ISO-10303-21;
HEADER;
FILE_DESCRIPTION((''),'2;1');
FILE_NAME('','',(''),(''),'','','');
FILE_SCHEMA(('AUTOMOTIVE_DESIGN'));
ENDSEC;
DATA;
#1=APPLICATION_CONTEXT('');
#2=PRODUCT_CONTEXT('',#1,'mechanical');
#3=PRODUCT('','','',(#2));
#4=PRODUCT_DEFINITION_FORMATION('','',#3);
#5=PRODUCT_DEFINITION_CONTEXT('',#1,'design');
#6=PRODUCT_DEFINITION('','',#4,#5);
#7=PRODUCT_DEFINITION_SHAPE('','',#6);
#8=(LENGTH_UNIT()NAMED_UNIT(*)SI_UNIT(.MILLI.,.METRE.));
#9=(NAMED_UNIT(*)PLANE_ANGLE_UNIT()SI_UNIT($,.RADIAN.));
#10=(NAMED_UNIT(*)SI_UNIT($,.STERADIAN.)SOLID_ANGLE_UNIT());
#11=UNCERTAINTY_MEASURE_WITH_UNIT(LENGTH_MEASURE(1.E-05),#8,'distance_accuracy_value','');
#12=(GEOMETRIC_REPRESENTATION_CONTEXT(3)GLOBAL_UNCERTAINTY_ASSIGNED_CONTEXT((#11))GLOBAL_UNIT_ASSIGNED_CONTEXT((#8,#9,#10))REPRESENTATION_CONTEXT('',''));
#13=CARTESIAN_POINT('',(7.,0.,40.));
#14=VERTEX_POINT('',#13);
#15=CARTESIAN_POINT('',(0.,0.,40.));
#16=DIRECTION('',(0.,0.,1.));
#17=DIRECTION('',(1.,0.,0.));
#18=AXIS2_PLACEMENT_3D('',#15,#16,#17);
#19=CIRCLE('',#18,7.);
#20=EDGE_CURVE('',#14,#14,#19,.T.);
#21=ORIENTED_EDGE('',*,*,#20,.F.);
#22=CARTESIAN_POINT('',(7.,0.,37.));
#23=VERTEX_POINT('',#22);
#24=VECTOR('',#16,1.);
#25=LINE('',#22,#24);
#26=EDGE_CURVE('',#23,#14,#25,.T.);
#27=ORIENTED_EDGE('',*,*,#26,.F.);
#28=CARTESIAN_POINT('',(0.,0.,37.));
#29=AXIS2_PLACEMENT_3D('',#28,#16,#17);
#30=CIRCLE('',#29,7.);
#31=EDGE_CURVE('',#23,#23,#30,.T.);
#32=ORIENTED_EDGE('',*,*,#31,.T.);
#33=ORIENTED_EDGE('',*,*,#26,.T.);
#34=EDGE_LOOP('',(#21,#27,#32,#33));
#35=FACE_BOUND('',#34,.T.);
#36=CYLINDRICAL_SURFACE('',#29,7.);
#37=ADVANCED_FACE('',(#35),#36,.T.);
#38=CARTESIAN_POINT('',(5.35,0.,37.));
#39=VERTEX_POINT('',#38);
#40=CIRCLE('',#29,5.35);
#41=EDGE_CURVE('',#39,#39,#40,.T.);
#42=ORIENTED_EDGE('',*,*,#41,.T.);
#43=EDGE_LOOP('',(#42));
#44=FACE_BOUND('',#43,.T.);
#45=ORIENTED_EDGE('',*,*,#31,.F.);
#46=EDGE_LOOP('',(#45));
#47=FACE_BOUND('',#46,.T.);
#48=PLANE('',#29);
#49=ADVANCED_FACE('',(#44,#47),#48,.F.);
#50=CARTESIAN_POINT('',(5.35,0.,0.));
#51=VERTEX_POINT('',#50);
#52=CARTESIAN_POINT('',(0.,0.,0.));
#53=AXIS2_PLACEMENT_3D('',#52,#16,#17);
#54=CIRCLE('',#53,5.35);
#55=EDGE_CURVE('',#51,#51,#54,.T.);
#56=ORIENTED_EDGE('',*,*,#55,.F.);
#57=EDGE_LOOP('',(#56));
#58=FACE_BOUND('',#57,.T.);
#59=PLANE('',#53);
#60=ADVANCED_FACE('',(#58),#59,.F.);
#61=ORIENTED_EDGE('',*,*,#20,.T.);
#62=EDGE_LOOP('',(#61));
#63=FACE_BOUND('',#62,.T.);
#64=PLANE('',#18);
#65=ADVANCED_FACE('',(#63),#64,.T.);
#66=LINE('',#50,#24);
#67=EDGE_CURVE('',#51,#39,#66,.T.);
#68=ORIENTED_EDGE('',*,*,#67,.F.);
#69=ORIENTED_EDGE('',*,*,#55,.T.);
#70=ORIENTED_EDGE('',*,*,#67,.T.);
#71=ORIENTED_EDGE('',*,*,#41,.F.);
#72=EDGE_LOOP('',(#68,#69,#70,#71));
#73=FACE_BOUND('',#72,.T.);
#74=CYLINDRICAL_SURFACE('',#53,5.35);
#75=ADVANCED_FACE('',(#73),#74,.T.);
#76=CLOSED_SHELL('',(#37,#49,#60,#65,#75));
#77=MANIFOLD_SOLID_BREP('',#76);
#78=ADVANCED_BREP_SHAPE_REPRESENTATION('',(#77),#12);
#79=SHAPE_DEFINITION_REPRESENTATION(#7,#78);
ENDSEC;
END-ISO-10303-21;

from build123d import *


# Not quite as in the source:
# - a feature names something its author has since deleted; it is built from what else it names


with BuildPart() as f1:
    # F0 (on Front) → F1 (revolve)
    with BuildSketch(Plane.XZ):
        Polygon((0, 40), (0, 0), (5.35, 0), (5.35, 37), (7, 37), (7, 40), align=None)
    revolve(axis=Axis((0, 0, 23.8549038768), (0, 0, 1)))


solid = f1.part
